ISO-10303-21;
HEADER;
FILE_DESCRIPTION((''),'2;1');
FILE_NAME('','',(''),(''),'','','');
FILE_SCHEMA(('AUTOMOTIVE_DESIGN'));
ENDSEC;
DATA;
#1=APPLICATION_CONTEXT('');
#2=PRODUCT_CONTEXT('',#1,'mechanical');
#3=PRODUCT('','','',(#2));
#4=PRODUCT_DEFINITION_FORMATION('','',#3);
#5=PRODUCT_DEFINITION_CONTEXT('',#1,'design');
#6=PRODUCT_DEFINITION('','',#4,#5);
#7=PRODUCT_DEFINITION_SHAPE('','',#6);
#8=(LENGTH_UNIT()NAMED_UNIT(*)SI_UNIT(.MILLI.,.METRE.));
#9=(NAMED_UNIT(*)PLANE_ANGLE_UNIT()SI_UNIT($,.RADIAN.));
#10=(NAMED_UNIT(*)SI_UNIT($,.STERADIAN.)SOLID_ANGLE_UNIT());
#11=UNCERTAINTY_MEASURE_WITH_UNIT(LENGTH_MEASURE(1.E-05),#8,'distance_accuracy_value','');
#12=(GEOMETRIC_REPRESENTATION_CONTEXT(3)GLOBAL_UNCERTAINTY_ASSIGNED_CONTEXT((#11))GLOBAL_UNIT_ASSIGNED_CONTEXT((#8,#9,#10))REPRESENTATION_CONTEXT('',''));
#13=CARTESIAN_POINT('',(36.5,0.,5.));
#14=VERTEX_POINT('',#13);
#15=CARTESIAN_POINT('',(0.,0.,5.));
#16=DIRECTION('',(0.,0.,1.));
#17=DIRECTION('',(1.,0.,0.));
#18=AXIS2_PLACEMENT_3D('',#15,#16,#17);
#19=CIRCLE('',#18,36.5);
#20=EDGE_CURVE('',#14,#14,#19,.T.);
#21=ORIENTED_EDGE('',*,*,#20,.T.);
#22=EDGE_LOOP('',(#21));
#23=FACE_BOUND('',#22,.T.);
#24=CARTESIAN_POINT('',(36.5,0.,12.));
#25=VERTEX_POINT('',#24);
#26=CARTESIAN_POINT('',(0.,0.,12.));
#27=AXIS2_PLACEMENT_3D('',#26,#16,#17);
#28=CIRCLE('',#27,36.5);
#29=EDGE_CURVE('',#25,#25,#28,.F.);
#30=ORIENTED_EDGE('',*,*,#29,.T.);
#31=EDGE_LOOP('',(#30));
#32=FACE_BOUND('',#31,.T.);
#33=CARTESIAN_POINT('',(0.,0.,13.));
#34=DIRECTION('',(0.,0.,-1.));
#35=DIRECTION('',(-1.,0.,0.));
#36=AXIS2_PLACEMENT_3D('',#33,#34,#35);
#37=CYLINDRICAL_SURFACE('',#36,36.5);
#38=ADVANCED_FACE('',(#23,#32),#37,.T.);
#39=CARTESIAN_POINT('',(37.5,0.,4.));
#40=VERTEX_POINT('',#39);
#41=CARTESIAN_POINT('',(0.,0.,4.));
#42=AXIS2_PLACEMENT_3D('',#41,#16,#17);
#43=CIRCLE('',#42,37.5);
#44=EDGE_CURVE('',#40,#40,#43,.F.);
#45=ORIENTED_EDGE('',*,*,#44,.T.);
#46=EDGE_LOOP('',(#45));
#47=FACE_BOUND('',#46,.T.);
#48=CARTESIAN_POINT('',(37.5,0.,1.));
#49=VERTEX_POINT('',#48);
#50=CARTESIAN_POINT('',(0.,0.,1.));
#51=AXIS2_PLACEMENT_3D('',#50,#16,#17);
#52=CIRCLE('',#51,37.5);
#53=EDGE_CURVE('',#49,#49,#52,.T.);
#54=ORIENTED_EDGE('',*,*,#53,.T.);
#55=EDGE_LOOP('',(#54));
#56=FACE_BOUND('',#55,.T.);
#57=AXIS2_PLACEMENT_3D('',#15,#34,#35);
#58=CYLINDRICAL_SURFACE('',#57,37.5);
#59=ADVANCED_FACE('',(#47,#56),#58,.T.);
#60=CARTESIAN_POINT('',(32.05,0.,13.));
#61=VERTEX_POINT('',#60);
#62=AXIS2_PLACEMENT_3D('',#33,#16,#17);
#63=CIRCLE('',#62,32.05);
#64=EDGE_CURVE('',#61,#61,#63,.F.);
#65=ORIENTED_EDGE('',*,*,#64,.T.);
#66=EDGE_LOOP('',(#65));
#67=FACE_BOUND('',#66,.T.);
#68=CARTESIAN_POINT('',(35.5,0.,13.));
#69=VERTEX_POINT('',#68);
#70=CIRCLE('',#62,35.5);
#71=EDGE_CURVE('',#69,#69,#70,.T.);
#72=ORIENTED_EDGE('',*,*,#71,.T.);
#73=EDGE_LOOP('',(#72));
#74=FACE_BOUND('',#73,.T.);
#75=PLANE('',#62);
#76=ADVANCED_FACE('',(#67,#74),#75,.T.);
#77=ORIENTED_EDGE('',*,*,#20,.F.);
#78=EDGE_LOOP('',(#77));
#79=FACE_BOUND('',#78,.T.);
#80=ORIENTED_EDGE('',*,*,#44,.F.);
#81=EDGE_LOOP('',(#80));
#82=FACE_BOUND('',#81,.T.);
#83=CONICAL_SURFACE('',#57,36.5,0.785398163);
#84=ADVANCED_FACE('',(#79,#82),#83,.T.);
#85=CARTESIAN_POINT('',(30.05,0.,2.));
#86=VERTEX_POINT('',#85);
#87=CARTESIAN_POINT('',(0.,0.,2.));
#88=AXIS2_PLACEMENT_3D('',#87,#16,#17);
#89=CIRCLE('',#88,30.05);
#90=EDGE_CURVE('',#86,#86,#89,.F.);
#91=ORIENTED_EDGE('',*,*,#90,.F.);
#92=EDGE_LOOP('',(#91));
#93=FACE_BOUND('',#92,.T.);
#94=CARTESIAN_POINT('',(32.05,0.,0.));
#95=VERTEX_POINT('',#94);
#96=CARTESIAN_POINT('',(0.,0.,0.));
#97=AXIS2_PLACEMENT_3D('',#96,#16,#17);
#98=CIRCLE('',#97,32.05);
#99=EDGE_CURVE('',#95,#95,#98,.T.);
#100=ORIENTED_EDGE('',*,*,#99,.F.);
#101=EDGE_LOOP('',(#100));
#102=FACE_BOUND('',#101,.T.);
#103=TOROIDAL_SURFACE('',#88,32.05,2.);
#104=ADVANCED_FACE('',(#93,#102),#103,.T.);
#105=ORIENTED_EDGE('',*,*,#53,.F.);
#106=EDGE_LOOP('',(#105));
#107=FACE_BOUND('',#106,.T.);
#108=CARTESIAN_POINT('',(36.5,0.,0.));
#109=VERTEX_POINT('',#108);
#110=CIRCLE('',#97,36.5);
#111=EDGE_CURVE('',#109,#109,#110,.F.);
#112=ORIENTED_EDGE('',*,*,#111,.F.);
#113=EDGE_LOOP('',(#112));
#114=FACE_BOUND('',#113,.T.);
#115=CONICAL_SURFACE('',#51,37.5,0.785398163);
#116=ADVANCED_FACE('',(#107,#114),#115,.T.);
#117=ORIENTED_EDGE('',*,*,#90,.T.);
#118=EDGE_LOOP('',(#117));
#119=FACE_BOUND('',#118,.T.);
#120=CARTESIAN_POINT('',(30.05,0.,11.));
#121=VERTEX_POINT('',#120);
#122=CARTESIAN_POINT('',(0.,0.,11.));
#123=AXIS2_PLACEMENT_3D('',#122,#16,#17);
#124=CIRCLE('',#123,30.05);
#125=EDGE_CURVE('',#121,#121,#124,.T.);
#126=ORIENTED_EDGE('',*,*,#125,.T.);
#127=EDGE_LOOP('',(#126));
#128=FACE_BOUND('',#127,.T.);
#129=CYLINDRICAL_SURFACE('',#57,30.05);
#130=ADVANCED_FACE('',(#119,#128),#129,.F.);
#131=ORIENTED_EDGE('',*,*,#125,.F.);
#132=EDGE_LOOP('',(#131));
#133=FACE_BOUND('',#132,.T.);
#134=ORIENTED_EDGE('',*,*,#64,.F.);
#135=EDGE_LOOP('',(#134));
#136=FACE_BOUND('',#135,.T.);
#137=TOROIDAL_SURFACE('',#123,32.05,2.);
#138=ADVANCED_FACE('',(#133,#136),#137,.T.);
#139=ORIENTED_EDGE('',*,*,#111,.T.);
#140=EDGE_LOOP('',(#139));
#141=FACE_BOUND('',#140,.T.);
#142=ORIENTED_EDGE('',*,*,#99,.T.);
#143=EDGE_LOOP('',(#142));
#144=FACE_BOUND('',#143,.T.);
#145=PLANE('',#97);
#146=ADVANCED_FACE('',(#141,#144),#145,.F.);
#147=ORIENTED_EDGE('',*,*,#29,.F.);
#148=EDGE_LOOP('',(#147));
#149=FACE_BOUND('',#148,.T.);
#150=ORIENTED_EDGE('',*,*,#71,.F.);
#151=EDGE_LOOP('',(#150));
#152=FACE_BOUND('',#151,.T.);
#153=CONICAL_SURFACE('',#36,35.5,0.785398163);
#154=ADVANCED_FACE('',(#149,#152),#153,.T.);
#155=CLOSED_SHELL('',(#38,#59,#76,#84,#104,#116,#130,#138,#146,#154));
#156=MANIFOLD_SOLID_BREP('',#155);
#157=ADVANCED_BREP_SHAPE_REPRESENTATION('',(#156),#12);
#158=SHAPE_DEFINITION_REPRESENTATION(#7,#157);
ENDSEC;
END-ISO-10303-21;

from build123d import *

# Parameters (mm, degrees)
SKETCH1_R           = 37.5
SKETCH1_R_2         = 30.05
BOSS_EXTRUDE1_DEPTH = 5
SKETCH2_R           = 36.5
SKETCH2_R_2         = 30.05
BOSS_EXTRUDE2_DEPTH = 8
CHAMFER1_SIZE       = 1
FILLET1_R           = 2


with BuildPart() as part:
    # Sketch1 → Boss-Extrude1 (new body)
    with BuildSketch(Plane.XY):
        Circle(SKETCH1_R)
        Circle(SKETCH1_R_2, mode=Mode.SUBTRACT)
    extrude(amount=BOSS_EXTRUDE1_DEPTH)

    # Sketch2 → Boss-Extrude2 (add)
    with BuildSketch(Plane.XY.offset(5)):
        Circle(SKETCH2_R)
        Circle(SKETCH2_R_2, mode=Mode.SUBTRACT)
    extrude(amount=BOSS_EXTRUDE2_DEPTH)

    # Chamfer1
    chamfer1_edges = [part.edges().sort_by_distance(p)[0] for p in [
        (-36.5, 0, 13),
        (-37.5, 0, 0),
        (-37.5, 0, 5),
    ]]
    chamfer(chamfer1_edges, length=CHAMFER1_SIZE - 0.0001)  # a hair under: the kernel refuses the full size

    # Fillet1
    fillet1_edges = [part.edges().sort_by_distance(p)[0] for p in [
        (-30.05, 0, 13),
        (-30.05, 0, 0),
    ]]
    fillet(fillet1_edges, radius=FILLET1_R)


solid = part.part
